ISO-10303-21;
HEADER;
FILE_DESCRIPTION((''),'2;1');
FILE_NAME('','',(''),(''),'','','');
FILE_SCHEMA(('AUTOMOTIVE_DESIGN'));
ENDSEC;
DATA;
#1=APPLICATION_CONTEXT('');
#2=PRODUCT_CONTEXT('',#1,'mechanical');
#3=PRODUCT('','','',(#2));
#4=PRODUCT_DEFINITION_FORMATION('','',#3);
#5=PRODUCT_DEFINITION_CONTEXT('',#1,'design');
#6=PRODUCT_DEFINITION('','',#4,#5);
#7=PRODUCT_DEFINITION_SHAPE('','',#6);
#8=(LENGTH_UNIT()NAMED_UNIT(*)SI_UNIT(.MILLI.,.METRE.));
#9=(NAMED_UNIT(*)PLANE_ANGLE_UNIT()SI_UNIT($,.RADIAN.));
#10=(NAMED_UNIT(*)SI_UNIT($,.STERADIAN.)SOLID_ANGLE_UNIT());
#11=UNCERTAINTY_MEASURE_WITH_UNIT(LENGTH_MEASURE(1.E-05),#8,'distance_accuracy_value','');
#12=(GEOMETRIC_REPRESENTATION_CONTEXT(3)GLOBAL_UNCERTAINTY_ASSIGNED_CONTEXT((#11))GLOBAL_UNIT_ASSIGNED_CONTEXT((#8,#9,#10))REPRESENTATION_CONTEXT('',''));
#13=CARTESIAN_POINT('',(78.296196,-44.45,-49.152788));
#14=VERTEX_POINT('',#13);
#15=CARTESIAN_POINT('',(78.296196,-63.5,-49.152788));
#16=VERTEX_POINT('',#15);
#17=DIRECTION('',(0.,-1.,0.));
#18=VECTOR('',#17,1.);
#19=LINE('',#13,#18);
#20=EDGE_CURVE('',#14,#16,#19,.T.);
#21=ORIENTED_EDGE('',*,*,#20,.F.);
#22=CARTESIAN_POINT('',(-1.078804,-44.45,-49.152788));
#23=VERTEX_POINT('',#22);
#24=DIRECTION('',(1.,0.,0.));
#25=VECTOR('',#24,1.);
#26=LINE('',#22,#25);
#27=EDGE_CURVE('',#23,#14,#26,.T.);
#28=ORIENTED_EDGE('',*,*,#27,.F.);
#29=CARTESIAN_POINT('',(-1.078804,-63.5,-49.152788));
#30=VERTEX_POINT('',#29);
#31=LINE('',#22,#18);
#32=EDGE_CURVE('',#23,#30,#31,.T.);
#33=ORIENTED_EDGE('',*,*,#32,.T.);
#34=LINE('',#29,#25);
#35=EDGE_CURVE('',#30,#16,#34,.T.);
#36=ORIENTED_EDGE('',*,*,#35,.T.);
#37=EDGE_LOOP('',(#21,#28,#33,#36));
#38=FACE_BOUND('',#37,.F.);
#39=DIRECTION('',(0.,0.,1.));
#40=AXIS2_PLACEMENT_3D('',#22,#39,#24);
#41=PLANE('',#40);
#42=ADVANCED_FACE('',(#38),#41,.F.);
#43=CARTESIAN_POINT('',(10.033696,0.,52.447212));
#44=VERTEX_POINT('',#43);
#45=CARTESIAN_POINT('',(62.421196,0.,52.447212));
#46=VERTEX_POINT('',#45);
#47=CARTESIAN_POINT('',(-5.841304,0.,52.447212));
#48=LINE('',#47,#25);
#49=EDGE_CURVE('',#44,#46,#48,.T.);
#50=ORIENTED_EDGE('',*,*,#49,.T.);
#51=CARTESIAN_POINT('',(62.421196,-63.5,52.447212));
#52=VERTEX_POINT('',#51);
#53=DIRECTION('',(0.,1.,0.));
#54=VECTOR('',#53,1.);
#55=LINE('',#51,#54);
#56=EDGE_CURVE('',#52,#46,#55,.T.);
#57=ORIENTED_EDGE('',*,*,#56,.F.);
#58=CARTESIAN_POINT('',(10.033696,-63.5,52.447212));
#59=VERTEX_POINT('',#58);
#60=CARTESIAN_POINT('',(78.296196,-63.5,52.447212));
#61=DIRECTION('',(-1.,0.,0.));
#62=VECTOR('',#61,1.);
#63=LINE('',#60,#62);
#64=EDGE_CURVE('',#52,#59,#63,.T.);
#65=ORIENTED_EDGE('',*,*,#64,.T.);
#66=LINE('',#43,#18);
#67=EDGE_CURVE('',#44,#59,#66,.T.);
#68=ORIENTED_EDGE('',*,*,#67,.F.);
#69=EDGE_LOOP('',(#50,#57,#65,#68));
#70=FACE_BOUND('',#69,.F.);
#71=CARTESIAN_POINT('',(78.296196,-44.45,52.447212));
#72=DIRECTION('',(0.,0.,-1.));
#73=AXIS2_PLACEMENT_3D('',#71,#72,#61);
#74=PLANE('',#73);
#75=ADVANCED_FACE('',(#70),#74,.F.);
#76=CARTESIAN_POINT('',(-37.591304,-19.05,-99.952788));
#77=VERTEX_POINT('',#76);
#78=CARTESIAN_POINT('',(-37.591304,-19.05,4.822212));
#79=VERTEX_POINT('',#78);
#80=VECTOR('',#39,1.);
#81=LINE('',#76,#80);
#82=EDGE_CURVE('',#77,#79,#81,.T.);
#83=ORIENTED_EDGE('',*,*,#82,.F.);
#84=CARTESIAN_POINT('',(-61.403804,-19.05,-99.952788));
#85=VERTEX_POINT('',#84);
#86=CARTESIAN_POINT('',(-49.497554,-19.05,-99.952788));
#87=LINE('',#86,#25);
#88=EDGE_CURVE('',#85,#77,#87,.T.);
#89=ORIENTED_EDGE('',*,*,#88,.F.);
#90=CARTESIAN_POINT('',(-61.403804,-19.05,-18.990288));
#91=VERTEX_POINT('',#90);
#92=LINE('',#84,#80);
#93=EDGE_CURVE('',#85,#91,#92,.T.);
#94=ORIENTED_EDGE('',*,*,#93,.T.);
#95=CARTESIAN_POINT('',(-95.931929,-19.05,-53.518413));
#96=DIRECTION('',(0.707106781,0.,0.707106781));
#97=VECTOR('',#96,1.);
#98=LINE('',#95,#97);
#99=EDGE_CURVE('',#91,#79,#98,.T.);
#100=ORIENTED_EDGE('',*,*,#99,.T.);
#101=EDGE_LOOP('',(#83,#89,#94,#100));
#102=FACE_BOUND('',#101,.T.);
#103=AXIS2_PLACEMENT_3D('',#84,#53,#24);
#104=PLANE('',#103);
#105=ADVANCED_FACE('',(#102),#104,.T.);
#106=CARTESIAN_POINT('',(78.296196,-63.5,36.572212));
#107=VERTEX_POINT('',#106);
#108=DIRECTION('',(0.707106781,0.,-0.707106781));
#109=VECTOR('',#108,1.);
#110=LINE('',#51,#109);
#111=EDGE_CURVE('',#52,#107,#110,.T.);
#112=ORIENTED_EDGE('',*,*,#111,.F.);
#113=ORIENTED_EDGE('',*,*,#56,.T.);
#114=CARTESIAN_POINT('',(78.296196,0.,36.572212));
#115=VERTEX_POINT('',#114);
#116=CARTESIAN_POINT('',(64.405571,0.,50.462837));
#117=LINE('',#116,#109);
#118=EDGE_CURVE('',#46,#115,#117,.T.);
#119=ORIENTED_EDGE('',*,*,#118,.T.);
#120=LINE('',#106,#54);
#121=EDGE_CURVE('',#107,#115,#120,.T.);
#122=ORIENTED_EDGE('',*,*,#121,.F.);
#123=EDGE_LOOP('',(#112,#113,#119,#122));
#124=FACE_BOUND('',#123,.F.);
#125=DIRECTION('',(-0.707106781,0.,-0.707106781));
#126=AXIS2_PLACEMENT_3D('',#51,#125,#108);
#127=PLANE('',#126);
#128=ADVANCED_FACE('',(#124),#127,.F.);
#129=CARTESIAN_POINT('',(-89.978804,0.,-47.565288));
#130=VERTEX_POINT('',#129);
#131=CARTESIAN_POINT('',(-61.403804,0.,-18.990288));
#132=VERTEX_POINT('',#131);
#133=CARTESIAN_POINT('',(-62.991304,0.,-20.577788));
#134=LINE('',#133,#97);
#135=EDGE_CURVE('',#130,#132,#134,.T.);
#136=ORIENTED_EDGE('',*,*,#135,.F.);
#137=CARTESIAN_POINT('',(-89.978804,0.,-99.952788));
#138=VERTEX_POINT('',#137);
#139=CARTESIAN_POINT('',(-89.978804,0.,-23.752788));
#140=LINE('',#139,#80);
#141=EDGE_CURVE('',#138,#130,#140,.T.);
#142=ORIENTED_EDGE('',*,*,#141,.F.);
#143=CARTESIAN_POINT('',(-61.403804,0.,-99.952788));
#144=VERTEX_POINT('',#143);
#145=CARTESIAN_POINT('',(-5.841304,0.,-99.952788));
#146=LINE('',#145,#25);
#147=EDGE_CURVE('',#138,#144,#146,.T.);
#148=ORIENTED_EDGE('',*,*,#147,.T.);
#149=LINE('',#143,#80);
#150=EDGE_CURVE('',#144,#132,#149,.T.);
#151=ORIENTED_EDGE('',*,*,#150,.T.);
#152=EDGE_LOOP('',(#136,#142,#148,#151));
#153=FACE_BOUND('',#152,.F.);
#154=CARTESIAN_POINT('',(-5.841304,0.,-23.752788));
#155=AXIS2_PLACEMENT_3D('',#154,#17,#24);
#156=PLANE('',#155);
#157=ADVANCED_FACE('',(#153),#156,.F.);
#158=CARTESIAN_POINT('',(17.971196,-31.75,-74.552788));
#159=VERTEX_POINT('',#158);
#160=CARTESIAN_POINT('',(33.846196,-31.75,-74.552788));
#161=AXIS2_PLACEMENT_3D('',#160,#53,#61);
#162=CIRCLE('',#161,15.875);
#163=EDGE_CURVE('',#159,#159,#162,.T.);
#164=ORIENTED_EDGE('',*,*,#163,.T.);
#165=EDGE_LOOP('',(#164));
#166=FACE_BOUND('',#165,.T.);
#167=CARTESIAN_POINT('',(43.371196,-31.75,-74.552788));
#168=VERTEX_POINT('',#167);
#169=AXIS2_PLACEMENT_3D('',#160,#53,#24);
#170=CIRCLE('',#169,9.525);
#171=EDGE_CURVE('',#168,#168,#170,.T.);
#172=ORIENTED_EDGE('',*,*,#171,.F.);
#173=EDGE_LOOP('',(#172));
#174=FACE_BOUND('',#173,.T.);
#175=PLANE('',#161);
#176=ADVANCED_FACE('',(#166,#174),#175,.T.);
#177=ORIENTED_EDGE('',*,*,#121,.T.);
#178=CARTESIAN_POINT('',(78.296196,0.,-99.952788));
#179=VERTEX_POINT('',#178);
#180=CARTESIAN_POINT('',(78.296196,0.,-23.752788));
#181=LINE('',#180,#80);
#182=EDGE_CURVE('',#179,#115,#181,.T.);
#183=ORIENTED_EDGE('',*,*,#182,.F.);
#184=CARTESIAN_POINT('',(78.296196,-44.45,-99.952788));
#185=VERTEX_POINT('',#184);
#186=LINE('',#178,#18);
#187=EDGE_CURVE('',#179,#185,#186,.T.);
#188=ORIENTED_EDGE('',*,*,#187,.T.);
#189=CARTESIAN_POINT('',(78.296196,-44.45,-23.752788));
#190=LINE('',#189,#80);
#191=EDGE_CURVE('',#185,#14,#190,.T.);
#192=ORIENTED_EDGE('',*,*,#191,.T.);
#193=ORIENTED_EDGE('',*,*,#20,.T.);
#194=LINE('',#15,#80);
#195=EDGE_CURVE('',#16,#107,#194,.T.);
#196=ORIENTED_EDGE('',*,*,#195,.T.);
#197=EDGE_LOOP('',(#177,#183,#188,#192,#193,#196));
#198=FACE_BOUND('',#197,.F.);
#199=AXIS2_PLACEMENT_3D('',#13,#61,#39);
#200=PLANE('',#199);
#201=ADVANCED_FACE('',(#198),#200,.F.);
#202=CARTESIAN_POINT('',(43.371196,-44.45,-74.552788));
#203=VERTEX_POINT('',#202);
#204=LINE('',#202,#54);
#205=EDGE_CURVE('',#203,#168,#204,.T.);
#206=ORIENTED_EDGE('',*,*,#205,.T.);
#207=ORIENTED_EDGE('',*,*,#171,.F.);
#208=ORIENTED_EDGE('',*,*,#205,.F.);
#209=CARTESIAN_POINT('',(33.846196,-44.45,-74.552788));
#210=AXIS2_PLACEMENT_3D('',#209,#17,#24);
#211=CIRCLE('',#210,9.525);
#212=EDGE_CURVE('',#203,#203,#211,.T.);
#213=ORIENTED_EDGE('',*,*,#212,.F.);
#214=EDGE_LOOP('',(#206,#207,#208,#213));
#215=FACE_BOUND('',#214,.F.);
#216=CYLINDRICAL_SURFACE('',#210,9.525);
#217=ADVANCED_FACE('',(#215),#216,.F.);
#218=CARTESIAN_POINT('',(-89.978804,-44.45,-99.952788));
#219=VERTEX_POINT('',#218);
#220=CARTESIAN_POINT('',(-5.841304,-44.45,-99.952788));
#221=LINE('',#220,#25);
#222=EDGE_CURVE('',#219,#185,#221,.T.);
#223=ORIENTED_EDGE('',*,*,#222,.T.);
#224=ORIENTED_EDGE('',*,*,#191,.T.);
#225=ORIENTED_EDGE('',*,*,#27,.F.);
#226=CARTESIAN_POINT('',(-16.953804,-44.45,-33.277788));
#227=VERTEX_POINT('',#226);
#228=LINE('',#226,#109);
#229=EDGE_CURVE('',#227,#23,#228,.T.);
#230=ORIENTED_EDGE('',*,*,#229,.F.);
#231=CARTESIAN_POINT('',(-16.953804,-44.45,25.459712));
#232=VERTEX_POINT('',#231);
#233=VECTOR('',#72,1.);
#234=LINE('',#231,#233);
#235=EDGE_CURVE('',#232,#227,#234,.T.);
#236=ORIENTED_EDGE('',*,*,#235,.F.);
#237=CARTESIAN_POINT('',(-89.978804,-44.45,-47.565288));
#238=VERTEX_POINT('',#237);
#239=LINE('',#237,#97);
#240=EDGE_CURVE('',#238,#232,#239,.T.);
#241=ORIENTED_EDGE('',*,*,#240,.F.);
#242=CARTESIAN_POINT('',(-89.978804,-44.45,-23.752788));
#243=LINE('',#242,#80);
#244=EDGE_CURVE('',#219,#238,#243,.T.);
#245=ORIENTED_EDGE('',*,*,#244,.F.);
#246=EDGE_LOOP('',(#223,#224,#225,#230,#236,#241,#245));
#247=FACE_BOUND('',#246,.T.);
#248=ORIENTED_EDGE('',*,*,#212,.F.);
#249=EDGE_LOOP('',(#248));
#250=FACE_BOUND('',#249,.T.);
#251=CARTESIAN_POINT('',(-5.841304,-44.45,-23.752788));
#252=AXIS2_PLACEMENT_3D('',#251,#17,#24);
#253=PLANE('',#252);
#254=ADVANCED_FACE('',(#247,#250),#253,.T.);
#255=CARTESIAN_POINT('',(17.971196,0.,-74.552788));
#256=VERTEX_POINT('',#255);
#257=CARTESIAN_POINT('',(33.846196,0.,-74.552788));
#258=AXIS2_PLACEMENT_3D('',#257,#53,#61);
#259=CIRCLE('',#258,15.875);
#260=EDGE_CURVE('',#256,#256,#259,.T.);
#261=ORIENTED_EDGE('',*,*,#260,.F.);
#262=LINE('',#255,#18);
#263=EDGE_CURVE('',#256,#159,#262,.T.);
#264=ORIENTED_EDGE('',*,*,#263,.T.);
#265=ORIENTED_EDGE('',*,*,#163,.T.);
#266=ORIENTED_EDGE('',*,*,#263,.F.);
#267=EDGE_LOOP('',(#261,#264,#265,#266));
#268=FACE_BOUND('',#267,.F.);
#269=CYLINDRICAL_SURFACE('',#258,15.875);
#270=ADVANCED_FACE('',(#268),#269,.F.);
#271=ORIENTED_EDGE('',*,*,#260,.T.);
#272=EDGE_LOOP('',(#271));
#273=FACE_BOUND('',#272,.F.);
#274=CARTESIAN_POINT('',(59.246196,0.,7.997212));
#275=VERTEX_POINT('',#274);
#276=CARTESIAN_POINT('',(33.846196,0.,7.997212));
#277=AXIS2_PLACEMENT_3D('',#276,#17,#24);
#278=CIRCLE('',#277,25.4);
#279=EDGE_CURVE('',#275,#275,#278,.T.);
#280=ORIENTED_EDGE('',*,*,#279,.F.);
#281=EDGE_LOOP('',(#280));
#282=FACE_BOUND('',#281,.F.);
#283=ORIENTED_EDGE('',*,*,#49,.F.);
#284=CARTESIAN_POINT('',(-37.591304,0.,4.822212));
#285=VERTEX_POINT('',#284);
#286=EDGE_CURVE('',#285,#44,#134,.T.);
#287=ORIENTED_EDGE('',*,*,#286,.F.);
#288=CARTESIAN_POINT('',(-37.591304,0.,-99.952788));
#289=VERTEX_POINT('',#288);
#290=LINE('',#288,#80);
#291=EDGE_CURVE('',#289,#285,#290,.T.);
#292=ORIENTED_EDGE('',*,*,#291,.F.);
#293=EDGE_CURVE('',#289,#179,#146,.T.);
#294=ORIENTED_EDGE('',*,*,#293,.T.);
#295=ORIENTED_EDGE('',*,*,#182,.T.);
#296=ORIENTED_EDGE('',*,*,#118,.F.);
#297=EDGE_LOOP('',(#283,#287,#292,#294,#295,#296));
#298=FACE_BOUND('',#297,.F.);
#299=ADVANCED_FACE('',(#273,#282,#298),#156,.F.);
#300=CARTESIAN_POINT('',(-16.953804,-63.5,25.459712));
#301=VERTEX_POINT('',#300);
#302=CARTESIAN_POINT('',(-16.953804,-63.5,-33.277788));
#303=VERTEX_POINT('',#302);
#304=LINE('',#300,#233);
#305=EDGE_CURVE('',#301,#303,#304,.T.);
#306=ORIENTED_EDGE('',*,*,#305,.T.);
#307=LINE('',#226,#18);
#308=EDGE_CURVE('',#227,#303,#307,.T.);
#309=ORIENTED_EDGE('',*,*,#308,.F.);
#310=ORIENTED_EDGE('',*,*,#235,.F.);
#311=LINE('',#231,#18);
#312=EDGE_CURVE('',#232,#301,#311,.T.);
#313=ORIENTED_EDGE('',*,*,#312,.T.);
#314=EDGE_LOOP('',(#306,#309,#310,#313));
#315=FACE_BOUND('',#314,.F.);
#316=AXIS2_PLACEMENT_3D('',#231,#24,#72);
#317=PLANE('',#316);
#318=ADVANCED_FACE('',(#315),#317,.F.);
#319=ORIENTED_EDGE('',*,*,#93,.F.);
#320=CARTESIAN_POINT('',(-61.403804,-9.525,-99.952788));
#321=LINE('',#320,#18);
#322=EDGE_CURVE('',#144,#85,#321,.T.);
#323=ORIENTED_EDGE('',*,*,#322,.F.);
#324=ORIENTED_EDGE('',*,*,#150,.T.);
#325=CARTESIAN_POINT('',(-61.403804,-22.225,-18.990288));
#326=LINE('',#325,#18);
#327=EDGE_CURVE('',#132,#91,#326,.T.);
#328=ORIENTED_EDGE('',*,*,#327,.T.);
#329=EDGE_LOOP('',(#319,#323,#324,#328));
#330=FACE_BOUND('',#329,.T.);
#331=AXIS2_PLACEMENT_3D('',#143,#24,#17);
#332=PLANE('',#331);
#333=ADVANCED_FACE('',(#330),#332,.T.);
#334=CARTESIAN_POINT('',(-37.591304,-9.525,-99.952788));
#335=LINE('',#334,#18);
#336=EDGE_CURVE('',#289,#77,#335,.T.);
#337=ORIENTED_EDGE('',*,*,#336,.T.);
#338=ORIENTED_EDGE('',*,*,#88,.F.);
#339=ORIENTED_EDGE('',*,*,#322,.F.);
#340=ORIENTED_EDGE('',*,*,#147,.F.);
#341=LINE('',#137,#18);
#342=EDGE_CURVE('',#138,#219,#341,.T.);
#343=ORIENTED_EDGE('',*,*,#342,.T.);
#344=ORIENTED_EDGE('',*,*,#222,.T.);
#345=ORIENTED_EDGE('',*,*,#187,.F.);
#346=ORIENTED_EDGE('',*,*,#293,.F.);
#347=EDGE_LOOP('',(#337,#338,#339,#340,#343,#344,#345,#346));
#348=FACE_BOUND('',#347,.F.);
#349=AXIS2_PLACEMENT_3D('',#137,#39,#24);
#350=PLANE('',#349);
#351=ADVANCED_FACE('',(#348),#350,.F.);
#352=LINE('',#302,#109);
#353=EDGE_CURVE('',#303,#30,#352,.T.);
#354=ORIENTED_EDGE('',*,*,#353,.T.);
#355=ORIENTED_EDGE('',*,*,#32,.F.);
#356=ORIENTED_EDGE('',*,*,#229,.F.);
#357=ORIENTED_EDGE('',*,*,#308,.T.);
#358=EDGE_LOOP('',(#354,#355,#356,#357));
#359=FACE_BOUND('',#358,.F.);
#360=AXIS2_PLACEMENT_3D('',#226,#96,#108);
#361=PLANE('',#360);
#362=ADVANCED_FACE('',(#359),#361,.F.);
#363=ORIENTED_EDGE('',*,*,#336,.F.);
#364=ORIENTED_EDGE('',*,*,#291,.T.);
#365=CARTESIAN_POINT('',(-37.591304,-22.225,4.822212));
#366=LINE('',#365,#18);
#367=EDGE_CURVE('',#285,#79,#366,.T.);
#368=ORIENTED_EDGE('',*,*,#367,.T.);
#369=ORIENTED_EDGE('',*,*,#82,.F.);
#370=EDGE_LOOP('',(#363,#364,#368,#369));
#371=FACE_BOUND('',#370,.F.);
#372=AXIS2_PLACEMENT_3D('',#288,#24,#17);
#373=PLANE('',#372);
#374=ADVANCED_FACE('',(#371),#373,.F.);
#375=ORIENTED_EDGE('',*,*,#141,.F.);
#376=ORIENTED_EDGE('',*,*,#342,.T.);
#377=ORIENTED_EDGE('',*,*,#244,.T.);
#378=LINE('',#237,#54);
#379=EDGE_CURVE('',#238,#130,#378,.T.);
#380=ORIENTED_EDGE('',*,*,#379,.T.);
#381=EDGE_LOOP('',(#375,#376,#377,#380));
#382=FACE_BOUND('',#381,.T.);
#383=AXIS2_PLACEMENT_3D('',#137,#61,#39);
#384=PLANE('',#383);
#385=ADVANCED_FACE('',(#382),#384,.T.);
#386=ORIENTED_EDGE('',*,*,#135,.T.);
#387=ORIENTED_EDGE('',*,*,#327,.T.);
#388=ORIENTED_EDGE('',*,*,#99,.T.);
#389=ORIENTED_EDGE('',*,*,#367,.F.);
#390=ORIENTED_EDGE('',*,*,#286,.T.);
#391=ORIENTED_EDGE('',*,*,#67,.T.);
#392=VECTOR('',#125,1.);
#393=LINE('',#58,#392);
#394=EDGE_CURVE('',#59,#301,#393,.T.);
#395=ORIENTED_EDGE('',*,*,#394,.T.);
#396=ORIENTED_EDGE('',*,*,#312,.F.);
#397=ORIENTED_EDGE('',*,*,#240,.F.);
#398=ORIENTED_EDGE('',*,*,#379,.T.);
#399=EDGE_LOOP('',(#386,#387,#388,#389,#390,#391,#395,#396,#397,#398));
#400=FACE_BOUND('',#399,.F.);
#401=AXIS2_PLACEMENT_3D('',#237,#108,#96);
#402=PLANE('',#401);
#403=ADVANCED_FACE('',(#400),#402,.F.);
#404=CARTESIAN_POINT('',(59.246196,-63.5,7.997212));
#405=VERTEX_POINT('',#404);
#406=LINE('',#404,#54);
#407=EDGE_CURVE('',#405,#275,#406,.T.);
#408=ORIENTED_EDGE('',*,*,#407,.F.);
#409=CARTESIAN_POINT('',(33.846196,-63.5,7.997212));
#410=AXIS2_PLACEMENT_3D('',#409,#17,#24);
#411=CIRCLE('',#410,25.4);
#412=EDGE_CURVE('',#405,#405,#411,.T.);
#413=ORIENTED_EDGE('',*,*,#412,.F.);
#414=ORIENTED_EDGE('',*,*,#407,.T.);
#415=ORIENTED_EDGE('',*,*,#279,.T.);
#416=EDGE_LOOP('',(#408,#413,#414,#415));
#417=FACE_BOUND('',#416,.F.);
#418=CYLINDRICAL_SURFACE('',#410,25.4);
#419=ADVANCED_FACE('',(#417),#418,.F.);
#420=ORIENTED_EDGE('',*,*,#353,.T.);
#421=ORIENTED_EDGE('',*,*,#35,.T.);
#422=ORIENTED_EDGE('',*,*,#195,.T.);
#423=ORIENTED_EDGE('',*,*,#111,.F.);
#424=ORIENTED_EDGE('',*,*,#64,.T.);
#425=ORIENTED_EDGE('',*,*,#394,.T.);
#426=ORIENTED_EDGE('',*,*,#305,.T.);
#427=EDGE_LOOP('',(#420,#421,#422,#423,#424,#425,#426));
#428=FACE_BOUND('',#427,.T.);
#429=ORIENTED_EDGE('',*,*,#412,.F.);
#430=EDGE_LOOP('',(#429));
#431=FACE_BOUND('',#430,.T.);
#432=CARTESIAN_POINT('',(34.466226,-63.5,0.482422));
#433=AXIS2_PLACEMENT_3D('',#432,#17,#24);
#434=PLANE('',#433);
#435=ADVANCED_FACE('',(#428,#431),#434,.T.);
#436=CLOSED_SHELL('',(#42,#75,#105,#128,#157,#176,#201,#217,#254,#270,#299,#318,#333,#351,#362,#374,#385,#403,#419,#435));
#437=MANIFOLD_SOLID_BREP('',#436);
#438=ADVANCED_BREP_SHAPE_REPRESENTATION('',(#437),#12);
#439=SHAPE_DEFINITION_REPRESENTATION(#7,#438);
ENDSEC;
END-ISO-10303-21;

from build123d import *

# Parameters (mm, degrees)
F0_W      = 168.275
F0_H      = 152.4
F1_DEPTH  = 44.45
F3_DEPTH  = 44.451
F4_W      = 23.8125
F4_H      = 19.05
F5_DEPTH  = 152.401
F7_DEPTH  = 19.05
F8_R      = 25.4
F9_DEPTH  = 63.501
F10_R     = 9.525
F11_DEPTH = 44.451
F12_R     = 15.875
F12_R_2   = 9.525
F13_DEPTH = 31.75


with BuildPart() as f1:
    # F0 (on Front) → F1 (new body)
    with BuildSketch(Plane.XZ):
        with Locations((-5.8413036168, -23.7527878196)):
            Rectangle(F0_W, F0_H)
    extrude(amount=F1_DEPTH)

    # F2 (on face) → F3 (cut, through all)
    with BuildSketch(Plane.XZ.offset(44.45)):
        Polygon((-89.9788036168, 52.4472121804), (-89.9788036168, -47.5652878196), (10.0336963832, 52.4472121804), align=None)
    extrude(amount=-F3_DEPTH, mode=Mode.SUBTRACT)

    # F4 (on face) → F5 (cut, through all)
    with BuildSketch(Plane(origin=(0, 0, -99.9527878196), x_dir=(1, 0, 0), z_dir=(0, 0, -1))):
        with Locations((-49.4975536168, 9.525)):
            Rectangle(F4_W, F4_H)
    extrude(amount=-F5_DEPTH, mode=Mode.SUBTRACT)

    # F6 (on face) → F7 (join)
    with BuildSketch(Plane.XZ.offset(44.45)):
        Polygon((-1.0788036168, -49.1527878196), (78.2961963832, -49.1527878196), (78.2961963832, 52.4472121804), (10.0336963832, 52.4472121804), (-16.9538036168, 25.4597121804), (-16.9538036168, -33.2777878196), align=None)
    extrude(amount=F7_DEPTH)

    # F8 (on face) → F9 (cut, through all)
    with BuildSketch(Plane.XZ.offset(63.5)):
        with Locations((33.8461963832, 7.9972121804)):
            Circle(F8_R)
        Polygon((78.2961963832, 52.4472121804), (62.4211963832, 52.4472121804), (78.2961963832, 36.5722121804), align=None)
    extrude(amount=-F9_DEPTH, mode=Mode.SUBTRACT)

    # F10 (on face) → F11 (cut, through all)
    with BuildSketch(Plane.XZ.offset(44.45)):
        with Locations((33.8461963832, -74.5527878196)):
            Circle(F10_R)
    extrude(amount=-F11_DEPTH, mode=Mode.SUBTRACT)

    # F12 (on face) → F13 (cut)
    with BuildSketch(Plane(origin=(0, 0, 0), x_dir=(-1, 0, 0), z_dir=(0, 1, 0))):
        with Locations((-33.8461963832, -74.5527878196)):
            Circle(F12_R)
        with Locations((-33.8461963832, -74.5527878196)):
            Circle(F12_R_2, mode=Mode.SUBTRACT)
    extrude(amount=-F13_DEPTH, mode=Mode.SUBTRACT)


solid = f1.part
